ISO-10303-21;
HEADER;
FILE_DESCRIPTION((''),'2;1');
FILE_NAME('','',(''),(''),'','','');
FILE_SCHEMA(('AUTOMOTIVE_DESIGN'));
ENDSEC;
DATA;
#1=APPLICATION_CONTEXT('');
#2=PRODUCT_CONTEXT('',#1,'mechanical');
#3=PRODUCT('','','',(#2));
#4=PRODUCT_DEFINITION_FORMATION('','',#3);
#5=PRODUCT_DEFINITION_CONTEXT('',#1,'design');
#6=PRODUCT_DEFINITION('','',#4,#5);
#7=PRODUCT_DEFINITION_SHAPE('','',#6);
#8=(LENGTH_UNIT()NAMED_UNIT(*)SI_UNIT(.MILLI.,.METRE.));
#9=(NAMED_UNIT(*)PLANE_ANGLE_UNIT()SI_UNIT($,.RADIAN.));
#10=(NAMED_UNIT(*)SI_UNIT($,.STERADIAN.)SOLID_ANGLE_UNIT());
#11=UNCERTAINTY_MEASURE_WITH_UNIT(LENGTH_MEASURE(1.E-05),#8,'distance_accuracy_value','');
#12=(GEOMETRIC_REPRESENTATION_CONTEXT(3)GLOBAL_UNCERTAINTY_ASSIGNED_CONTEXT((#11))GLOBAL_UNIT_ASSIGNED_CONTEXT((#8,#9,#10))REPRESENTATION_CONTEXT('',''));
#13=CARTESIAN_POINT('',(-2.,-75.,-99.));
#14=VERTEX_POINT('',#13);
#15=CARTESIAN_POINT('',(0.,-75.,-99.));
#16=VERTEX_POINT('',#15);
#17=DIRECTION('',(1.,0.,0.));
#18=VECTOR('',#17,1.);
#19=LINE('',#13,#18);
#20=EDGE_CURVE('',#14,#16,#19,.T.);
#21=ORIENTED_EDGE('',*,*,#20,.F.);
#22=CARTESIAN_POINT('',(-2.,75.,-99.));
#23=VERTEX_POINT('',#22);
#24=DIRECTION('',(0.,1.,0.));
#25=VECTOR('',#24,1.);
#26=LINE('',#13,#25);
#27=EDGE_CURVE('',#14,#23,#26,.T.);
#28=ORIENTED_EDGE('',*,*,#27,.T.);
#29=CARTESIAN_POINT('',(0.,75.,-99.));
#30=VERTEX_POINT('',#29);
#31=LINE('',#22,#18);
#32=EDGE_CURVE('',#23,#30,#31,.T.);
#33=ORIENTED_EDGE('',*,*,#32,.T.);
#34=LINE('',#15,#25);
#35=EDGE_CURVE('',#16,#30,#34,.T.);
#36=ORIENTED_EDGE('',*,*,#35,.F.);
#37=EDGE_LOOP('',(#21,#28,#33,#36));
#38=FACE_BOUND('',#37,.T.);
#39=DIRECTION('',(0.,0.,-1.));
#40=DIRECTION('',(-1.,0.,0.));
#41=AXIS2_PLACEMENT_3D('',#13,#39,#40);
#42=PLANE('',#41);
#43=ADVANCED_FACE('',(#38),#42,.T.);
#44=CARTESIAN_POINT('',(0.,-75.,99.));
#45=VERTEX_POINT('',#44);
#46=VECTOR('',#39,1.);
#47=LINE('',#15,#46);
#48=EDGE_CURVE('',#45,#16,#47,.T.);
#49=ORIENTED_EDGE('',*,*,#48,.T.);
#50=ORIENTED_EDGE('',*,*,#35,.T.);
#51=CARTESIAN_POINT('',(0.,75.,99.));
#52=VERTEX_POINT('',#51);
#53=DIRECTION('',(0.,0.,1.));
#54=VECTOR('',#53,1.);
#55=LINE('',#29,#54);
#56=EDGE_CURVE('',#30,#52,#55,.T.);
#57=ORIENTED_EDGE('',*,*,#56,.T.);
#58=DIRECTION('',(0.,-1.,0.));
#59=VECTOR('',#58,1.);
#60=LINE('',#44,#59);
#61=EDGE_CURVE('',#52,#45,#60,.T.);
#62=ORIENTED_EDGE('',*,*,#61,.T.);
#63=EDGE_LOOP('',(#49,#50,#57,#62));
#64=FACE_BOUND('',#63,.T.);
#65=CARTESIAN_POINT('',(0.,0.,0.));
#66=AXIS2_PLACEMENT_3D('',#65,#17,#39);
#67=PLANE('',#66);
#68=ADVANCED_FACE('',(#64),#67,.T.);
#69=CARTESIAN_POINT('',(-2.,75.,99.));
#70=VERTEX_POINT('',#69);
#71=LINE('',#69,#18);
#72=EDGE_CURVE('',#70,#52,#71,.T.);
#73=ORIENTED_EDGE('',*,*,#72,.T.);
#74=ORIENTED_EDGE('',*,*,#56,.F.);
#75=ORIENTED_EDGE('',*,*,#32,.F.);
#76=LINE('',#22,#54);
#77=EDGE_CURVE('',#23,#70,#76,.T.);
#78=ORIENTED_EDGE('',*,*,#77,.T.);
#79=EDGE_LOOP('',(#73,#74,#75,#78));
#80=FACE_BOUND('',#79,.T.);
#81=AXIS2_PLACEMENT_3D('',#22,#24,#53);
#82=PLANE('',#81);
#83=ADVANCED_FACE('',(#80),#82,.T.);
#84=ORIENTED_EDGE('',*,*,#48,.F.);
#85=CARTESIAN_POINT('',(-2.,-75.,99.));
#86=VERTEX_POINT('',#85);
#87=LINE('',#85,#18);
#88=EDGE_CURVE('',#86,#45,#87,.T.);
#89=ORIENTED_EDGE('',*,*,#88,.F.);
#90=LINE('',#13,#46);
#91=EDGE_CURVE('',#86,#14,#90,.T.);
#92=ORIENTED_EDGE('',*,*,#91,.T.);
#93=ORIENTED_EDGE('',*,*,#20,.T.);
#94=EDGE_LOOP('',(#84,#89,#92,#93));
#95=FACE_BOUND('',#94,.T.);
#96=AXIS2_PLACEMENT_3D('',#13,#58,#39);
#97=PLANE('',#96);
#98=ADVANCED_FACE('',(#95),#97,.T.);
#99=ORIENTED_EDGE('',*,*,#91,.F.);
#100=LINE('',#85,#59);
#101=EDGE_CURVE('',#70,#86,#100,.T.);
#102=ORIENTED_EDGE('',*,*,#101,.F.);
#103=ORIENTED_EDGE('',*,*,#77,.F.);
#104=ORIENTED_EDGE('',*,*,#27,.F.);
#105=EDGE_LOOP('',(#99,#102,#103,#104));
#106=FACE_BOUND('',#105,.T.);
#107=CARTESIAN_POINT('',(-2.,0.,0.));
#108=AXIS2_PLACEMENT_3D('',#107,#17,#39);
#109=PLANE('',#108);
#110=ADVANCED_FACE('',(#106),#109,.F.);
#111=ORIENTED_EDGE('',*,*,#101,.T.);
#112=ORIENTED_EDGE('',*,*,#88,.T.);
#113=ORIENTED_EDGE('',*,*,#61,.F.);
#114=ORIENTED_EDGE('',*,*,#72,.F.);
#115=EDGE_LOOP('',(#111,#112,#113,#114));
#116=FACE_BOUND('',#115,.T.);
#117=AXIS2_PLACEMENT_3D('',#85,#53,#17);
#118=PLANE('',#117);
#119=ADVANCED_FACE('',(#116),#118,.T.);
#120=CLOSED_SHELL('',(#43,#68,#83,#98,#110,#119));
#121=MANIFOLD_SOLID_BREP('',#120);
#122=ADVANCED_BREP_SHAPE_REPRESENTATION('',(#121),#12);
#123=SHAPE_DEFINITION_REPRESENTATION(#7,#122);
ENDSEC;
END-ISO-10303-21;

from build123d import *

# Parameters (mm, degrees)
SKETCH1_W          = 198
SKETCH1_H          = 150
BASE_FLANGE1_DEPTH = 2


# Sheet-metal steps are written as plain solids
with BuildPart() as part:
    # Sketch1 → Base-Flange1 (new body)
    with BuildSketch(Plane(origin=(0, 0, 0), x_dir=(0, 0, -1), z_dir=(1, 0, 0))):
        Rectangle(SKETCH1_W, SKETCH1_H)
    extrude(amount=-BASE_FLANGE1_DEPTH)


solid = part.part
